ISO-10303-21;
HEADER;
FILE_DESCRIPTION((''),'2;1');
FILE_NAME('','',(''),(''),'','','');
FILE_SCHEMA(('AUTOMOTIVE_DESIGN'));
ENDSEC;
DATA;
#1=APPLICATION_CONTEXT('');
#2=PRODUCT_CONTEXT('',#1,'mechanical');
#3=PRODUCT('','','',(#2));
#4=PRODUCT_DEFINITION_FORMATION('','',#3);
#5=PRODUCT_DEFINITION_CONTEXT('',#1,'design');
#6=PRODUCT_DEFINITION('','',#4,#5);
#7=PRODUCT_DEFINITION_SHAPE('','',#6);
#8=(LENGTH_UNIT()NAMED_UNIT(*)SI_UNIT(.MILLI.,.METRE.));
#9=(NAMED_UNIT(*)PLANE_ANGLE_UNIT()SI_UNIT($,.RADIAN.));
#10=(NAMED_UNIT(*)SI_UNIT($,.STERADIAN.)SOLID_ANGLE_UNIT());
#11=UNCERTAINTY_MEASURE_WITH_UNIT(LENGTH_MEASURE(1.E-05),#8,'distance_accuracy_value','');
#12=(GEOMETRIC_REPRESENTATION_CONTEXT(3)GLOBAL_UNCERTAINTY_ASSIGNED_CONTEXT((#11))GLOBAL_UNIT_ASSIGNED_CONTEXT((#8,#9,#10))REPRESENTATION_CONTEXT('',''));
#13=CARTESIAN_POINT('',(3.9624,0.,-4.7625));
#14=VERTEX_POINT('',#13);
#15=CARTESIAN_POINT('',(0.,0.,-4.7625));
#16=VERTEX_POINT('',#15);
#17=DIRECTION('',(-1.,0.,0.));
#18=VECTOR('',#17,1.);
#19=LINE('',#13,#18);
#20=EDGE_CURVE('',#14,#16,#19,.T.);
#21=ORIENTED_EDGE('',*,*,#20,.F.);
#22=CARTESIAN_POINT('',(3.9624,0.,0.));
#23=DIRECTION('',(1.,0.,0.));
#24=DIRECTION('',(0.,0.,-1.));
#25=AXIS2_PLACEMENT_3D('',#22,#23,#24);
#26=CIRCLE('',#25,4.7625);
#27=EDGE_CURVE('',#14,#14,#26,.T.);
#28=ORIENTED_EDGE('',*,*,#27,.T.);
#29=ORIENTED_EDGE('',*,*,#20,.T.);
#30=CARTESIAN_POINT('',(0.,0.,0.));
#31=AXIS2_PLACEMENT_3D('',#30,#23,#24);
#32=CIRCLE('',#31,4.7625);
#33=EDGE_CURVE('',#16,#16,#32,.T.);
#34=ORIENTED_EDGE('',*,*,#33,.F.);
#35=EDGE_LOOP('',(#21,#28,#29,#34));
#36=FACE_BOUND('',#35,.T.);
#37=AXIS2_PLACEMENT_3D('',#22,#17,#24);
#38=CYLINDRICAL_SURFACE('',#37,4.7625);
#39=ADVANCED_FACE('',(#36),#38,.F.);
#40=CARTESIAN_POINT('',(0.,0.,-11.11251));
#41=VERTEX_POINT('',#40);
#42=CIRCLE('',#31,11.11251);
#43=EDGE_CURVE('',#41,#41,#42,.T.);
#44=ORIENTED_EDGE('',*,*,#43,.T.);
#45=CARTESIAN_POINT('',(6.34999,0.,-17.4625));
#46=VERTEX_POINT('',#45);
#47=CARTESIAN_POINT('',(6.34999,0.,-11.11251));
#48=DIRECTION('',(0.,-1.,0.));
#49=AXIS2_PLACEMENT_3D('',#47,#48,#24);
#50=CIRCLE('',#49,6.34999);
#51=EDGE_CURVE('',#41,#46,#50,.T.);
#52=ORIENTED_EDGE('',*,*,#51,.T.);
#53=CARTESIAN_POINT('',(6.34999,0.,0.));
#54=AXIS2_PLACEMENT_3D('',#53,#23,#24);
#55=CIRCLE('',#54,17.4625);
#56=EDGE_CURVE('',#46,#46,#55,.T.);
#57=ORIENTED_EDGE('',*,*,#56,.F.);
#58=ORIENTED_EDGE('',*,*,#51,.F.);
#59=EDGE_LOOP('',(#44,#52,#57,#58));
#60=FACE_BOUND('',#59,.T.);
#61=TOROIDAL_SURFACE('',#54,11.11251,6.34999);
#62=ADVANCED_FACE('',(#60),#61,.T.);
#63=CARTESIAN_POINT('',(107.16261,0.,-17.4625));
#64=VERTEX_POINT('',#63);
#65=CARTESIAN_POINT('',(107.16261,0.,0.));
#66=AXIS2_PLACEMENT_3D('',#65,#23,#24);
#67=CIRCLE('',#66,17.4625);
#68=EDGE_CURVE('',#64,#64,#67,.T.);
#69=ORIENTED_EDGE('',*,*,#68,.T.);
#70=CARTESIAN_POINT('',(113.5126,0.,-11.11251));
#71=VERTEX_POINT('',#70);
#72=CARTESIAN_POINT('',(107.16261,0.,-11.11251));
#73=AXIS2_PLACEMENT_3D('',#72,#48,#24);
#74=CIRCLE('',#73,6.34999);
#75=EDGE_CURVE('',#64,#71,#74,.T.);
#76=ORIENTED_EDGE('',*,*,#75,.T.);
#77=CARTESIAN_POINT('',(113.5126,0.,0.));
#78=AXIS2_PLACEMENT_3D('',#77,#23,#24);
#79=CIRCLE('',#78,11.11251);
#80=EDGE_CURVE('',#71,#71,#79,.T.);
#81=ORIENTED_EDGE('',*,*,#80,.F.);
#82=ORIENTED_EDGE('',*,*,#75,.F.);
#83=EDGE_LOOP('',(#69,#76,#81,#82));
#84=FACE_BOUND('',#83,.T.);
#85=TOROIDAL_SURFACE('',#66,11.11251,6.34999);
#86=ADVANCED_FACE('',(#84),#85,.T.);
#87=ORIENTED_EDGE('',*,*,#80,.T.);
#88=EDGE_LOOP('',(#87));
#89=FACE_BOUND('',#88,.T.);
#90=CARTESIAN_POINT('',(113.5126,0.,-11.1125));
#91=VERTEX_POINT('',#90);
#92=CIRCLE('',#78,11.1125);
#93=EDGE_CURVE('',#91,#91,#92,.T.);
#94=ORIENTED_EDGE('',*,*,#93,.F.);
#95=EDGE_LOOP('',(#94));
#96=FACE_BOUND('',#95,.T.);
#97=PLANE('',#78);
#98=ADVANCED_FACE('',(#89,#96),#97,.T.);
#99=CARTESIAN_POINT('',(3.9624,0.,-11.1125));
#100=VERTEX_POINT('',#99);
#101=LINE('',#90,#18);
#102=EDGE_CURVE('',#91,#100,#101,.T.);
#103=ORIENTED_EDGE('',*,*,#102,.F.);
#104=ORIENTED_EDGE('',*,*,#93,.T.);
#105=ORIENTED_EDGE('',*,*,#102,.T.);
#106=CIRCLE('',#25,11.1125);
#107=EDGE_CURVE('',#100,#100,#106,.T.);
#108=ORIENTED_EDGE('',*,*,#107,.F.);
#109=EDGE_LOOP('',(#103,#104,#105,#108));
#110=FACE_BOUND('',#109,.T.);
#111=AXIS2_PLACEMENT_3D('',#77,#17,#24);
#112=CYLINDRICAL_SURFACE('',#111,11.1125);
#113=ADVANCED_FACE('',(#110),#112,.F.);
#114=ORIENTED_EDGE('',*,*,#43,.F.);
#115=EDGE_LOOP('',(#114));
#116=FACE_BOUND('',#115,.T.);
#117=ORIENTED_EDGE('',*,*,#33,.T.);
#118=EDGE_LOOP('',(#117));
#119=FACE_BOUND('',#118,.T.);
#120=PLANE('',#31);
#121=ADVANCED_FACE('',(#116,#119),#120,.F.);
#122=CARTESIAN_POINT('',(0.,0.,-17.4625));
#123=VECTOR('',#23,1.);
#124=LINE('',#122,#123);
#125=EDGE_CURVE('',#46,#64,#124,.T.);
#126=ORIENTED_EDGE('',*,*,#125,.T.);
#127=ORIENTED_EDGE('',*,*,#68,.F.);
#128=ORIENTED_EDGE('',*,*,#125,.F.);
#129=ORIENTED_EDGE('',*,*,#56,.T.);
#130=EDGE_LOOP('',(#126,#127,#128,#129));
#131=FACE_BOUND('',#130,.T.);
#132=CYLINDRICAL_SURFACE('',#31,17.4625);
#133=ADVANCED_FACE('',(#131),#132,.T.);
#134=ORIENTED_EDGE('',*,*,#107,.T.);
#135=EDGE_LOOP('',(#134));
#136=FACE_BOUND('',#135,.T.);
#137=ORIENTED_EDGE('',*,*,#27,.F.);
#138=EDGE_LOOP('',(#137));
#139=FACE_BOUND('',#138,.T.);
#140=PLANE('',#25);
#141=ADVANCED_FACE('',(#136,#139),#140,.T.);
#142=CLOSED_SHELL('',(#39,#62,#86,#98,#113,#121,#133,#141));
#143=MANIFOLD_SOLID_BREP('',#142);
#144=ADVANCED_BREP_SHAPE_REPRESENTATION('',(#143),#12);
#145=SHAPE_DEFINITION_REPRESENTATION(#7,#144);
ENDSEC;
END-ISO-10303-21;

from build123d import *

# Parameters (mm, degrees)
F2_R = 6.34999


# Not quite as in the source:
# - a fillet or chamfer is up to 0.001 mm smaller than in the source, because OpenCascade refuses the exact size


with BuildPart() as f1:
    # F0 (on Front) → F1 (revolve)
    with BuildSketch(Plane.XZ):
        Polygon((3.9624, -4.7625), (0, -4.7625), (0, -17.4625), (113.5126, -17.4625), (113.5126, -11.1125), (3.9624, -11.1125), align=None)
    revolve(axis=Axis((63.5, 0, 0), (1, 0, 0)))

    # F2 (radius 6.35 in the source; OpenCascade refuses exactly that, so slightly less here)
    f2_edges = [f1.edges().sort_by_distance(p)[0] for p in [
        (0, 0, 17.4625),
        (113.5126, 0, 17.4625),
    ]]
    fillet(f2_edges, radius=F2_R)


solid = f1.part
